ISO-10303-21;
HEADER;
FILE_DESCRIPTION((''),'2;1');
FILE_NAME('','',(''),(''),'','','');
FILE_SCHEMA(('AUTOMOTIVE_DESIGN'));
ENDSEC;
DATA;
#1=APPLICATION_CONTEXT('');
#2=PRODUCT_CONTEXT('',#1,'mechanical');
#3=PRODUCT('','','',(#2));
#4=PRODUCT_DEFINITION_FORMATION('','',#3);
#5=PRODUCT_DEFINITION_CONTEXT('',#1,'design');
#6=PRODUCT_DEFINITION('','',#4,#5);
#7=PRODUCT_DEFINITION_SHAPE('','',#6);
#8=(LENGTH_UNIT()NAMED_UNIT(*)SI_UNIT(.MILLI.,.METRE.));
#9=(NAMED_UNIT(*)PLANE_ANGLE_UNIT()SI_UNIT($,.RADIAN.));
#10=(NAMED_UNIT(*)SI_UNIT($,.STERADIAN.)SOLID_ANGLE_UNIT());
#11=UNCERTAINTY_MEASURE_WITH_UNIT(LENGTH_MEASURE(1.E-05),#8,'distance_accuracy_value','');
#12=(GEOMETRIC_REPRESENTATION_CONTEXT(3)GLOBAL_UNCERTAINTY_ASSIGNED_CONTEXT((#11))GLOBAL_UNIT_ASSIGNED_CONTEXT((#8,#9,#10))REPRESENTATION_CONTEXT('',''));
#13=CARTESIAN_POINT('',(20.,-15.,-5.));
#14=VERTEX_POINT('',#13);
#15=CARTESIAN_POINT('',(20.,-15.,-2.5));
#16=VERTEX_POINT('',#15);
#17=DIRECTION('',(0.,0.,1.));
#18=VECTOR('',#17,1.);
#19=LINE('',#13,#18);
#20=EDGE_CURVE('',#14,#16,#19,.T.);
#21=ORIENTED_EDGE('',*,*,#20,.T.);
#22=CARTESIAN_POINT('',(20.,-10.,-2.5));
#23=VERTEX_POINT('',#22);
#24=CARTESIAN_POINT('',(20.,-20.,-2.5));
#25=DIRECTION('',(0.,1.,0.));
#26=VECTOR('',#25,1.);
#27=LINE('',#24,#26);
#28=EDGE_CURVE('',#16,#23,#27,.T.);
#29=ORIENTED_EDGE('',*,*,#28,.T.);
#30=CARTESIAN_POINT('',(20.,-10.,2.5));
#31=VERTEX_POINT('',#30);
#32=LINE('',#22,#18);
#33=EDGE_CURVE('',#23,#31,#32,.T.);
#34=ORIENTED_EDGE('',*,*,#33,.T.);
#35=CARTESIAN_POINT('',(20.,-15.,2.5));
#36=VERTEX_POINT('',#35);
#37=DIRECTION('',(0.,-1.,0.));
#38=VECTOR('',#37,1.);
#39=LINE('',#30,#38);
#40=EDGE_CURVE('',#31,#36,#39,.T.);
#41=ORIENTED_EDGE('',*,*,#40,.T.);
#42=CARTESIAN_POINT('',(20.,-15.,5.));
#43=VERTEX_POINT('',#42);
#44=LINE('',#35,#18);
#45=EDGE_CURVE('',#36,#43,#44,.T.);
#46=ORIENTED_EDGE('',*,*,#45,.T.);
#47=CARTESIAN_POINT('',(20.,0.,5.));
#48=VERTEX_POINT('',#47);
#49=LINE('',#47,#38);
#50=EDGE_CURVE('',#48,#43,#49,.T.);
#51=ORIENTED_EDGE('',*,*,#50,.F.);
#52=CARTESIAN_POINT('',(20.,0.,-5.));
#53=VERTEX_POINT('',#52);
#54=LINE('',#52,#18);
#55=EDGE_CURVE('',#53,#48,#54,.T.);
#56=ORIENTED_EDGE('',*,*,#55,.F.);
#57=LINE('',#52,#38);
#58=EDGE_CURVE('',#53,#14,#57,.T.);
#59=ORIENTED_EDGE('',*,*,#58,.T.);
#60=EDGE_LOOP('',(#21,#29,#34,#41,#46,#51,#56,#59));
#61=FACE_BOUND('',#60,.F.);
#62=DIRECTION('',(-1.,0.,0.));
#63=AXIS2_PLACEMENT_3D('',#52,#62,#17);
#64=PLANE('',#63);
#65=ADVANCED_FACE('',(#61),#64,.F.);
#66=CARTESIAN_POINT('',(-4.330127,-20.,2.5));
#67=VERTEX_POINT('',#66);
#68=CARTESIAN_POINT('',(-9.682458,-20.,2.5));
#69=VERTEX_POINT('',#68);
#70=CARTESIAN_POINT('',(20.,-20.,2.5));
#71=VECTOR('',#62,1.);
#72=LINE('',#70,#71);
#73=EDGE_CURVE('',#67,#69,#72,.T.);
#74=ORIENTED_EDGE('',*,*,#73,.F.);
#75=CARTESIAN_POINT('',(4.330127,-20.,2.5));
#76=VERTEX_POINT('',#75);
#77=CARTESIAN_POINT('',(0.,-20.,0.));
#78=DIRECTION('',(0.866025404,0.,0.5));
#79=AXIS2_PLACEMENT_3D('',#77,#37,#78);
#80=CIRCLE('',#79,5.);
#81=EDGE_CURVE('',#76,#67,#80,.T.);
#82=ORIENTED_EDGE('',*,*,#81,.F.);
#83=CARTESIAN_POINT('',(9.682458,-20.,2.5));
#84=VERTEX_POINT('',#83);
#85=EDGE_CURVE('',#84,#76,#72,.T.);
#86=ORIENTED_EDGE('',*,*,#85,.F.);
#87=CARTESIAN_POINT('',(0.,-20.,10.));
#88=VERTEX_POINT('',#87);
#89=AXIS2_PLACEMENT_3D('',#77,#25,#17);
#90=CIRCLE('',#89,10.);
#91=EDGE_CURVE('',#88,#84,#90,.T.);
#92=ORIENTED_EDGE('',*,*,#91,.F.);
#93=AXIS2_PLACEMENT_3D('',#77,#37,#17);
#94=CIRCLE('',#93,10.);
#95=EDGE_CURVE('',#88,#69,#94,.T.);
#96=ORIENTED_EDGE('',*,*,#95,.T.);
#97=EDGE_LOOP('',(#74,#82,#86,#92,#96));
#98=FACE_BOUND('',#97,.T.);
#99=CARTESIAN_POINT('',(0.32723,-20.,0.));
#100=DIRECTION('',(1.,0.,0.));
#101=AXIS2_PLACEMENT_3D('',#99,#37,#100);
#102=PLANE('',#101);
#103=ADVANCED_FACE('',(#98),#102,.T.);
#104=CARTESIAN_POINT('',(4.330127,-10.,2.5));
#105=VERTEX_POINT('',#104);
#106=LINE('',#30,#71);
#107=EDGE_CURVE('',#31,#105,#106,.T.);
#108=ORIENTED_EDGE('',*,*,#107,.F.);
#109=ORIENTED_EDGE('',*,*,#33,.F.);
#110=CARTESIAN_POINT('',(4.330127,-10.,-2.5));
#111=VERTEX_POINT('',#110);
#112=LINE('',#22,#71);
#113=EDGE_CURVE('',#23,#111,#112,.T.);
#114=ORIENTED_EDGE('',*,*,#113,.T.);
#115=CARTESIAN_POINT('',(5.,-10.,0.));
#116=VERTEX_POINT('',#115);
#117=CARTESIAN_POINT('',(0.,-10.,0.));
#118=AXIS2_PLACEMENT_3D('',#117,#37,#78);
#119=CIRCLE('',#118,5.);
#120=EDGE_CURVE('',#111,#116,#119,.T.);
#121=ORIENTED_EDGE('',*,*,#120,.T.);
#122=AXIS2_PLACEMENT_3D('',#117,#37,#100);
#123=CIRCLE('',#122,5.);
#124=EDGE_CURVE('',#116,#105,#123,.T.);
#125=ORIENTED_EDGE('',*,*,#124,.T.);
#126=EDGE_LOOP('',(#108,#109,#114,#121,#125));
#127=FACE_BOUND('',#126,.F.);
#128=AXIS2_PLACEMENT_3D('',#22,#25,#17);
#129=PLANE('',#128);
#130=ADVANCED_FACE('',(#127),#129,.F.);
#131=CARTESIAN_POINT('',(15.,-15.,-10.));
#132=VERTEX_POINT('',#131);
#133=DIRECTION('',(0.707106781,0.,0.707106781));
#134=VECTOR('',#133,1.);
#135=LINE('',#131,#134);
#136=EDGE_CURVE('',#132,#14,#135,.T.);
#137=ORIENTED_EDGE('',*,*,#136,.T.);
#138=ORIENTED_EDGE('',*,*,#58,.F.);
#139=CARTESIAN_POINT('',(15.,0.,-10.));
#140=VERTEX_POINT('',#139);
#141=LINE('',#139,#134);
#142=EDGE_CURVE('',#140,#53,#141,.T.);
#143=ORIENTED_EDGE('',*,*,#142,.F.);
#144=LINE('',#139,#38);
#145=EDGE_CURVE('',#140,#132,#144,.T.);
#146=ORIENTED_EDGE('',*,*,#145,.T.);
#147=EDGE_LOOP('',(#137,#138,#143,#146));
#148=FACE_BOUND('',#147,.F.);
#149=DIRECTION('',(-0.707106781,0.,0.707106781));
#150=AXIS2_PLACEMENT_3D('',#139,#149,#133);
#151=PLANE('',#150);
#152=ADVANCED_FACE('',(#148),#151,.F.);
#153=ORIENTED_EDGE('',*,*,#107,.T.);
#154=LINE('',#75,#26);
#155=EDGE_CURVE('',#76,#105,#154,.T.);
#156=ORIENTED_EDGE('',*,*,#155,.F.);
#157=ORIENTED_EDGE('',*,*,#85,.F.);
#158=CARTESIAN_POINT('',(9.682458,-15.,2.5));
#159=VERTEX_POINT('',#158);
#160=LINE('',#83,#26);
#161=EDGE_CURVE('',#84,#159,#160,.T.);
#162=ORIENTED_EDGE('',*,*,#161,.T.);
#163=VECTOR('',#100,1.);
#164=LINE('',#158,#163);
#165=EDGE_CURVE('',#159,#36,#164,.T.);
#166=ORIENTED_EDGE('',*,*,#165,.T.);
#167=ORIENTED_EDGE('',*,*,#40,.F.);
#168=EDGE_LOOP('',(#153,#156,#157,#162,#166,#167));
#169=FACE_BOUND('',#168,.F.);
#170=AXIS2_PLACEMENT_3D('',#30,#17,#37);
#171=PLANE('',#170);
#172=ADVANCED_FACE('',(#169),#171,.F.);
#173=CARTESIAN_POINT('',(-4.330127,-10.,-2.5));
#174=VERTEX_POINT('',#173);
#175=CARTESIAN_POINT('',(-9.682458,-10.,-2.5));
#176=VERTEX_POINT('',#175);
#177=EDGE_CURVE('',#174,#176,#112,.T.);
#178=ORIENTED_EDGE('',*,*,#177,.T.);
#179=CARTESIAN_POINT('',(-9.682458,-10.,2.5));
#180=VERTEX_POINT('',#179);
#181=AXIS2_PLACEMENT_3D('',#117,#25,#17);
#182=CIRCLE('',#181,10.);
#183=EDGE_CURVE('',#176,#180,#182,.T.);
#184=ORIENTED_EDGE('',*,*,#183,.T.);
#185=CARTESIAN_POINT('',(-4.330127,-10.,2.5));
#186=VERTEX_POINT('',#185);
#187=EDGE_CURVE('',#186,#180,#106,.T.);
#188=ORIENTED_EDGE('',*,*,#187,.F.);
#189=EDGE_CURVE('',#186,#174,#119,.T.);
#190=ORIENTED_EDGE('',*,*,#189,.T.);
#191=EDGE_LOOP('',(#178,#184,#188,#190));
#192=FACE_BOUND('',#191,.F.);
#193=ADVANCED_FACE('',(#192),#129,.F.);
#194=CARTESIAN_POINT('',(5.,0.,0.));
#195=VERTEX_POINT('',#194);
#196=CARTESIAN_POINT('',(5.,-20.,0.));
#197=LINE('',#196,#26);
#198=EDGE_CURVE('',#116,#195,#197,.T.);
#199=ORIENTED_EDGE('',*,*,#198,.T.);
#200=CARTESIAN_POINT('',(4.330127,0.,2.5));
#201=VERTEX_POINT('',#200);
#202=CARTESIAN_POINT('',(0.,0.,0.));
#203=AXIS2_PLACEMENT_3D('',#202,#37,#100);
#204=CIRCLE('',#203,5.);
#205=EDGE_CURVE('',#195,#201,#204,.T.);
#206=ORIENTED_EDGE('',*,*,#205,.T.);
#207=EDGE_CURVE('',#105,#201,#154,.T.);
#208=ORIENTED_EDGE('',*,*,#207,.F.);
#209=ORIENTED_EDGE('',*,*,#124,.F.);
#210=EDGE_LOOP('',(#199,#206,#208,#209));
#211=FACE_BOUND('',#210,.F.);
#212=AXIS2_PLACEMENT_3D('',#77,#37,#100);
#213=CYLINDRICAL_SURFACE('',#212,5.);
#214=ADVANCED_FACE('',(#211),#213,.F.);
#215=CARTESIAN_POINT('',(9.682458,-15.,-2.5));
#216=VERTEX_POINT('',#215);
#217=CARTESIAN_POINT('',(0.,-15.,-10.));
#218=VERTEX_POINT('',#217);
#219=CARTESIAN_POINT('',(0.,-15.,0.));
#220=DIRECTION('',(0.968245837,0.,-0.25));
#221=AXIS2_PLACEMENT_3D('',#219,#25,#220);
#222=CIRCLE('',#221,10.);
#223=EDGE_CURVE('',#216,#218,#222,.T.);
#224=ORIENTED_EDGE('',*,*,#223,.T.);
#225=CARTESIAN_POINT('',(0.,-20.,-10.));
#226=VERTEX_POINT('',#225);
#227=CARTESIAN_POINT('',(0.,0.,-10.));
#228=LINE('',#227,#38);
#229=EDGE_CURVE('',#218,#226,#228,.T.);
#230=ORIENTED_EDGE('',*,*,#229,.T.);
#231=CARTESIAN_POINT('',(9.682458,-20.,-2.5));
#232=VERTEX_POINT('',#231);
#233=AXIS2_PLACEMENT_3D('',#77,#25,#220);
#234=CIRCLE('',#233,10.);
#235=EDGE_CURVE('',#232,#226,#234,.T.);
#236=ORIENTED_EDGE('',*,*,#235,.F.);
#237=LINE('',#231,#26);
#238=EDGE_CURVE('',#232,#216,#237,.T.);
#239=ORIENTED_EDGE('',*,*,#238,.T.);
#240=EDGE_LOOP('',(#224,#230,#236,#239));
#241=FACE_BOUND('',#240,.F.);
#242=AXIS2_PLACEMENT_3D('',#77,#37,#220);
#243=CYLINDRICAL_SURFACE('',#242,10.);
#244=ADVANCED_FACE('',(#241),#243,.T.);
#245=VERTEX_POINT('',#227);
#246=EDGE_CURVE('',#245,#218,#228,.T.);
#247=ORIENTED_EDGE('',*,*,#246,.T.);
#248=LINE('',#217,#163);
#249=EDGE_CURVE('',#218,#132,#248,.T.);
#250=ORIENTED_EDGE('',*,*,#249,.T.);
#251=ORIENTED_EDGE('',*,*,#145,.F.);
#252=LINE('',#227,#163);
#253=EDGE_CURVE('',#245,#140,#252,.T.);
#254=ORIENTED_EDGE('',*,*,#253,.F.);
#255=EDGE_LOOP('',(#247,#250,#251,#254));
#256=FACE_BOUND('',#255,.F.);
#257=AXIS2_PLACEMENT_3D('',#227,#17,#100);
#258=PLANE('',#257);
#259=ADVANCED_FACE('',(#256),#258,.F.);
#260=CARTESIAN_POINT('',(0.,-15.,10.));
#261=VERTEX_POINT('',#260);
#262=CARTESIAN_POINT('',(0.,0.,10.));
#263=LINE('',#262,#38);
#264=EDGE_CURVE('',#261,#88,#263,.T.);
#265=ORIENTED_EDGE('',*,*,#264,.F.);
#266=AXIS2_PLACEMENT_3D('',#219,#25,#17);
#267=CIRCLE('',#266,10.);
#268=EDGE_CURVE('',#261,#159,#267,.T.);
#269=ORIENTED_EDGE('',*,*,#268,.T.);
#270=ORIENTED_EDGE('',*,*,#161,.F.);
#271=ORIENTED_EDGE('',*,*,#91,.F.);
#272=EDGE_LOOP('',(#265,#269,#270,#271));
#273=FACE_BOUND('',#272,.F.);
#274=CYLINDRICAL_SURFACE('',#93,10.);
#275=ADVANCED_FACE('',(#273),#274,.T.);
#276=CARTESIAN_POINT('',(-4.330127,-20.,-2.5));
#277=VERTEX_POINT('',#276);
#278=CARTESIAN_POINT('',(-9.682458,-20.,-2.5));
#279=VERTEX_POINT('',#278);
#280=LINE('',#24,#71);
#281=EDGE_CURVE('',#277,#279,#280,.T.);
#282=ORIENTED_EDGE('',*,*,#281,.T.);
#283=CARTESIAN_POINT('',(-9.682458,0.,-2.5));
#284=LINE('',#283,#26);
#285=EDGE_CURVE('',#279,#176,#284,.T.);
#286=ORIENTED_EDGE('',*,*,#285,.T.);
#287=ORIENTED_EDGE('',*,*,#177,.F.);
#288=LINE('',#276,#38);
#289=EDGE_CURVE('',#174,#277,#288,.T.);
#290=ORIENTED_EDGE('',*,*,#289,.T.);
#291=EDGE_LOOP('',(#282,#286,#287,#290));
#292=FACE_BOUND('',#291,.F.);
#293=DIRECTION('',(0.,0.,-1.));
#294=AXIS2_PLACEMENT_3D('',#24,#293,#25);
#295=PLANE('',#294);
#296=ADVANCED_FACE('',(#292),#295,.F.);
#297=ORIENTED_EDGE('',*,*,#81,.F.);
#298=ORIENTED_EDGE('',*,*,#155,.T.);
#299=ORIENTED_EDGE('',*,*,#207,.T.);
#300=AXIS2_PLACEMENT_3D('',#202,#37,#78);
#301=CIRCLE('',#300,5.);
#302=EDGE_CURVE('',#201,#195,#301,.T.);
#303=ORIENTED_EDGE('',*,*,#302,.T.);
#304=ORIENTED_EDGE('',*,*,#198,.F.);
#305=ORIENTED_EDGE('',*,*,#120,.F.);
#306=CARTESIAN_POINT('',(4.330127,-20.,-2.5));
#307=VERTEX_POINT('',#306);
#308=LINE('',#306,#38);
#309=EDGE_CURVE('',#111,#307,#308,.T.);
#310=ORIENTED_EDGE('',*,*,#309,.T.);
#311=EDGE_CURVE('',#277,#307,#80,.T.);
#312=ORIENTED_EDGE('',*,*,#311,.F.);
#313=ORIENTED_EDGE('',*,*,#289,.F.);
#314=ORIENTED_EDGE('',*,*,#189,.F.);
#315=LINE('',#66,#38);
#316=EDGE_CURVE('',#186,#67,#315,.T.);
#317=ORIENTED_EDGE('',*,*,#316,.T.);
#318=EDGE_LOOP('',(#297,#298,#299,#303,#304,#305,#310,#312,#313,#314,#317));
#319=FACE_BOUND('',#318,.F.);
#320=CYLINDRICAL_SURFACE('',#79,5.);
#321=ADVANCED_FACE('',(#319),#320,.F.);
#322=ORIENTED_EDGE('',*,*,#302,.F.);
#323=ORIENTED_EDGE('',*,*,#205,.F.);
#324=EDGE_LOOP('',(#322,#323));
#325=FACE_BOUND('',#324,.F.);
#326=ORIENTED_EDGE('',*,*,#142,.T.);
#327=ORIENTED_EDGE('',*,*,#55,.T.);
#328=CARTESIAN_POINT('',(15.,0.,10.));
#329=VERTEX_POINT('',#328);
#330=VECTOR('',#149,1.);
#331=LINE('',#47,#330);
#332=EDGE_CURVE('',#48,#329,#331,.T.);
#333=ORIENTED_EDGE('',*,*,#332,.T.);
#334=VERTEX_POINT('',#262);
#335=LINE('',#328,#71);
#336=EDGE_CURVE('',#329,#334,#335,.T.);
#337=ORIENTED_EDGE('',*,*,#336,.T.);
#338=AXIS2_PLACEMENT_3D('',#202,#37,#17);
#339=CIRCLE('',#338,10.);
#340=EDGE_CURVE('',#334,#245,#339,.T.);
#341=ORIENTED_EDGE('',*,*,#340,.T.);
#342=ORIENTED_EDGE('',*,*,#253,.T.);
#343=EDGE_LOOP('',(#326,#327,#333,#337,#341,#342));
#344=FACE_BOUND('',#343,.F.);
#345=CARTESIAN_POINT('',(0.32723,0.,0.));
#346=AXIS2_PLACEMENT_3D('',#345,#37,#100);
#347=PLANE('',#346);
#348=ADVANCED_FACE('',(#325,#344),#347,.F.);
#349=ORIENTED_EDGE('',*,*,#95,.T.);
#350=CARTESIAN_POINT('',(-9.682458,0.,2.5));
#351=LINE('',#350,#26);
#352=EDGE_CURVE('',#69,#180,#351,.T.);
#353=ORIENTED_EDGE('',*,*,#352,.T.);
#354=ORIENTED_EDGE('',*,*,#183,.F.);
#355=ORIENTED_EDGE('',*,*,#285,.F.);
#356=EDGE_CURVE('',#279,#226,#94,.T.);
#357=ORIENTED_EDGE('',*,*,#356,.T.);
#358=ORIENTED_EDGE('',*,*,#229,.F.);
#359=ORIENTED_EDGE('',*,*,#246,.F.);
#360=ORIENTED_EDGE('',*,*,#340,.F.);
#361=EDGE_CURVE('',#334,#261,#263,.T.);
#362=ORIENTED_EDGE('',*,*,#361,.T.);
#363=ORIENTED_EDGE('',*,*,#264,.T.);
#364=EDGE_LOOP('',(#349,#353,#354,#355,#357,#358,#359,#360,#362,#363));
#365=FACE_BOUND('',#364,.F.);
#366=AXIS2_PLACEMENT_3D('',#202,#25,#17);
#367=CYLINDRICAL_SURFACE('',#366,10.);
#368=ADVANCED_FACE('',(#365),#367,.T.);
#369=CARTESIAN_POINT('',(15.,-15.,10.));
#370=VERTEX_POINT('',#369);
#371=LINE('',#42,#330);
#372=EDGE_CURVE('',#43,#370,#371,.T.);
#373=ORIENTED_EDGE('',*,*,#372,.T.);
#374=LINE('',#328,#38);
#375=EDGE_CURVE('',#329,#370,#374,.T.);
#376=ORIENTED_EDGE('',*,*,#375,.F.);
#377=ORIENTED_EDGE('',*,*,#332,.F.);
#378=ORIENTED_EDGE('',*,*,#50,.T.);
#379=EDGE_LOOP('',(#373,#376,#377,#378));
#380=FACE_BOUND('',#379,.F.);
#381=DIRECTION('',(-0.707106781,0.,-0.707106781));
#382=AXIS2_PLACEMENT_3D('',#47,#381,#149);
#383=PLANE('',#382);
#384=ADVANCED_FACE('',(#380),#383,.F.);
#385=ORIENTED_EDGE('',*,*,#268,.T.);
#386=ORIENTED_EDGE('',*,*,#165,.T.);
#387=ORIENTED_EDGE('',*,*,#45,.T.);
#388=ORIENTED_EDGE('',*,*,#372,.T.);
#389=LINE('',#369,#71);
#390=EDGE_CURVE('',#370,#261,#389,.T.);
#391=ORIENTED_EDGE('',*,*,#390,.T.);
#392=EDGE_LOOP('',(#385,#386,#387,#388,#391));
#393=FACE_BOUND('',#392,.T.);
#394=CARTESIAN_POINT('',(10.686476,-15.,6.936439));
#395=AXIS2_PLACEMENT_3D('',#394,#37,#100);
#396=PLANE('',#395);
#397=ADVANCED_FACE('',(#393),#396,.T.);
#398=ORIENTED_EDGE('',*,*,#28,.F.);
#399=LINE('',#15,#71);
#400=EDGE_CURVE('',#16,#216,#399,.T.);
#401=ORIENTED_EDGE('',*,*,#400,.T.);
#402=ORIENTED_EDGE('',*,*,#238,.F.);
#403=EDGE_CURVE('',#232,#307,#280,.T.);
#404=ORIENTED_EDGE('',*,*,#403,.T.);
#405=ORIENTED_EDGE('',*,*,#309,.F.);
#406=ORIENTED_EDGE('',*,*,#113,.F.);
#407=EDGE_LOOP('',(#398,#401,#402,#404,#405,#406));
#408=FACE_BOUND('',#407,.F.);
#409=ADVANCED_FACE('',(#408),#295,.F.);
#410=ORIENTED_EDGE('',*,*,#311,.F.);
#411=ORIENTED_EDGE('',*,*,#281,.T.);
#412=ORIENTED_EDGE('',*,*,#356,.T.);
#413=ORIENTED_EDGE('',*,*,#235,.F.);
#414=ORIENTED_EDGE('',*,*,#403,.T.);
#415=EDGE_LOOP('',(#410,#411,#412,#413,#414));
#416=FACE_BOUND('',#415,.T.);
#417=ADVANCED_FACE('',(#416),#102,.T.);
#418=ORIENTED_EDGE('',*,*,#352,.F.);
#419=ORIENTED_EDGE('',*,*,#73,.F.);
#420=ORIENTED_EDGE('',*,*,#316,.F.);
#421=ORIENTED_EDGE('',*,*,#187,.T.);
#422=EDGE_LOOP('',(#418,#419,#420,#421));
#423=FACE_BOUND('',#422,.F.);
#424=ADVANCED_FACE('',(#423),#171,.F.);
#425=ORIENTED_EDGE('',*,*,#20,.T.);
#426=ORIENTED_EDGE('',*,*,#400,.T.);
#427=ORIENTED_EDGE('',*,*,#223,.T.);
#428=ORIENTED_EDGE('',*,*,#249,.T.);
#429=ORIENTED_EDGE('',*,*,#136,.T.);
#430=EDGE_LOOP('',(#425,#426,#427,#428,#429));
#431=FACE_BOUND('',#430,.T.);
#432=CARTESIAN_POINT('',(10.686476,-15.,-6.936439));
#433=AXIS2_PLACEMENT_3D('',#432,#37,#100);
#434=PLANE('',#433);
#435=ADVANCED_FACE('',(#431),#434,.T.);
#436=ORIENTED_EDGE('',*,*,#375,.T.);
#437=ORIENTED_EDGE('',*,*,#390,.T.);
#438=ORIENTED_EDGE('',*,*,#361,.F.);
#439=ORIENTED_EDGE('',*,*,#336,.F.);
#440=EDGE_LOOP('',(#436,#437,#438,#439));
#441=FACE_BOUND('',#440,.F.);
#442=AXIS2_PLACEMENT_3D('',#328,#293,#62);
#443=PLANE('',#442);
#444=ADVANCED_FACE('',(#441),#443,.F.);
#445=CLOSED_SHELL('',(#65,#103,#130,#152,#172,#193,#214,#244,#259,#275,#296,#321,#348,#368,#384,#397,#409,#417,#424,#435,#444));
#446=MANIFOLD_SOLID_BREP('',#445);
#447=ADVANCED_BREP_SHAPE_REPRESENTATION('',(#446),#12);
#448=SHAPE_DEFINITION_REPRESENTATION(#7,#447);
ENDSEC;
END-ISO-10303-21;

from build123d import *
from build123d import SkipClean  # not in build123d's __all__

# Parameters (mm, degrees)
F1_DEPTH = 20
F3_DEPTH = 50
F5_DEPTH = 5
F7_DEPTH = 25


# Not quite as in the source:
# - after a boolean that leaves OpenCascade's solid faulty, fix() repairs it


with BuildPart() as f1:
    # F0 (on Front) → F1 (new body)
    with BuildSketch(Plane.XZ):
        with BuildLine():
            ThreePointArc((0, -10), (7.0710678119, -7.0710678119), (10, 0))
            ThreePointArc((10, 0), (7.0710678119, 7.0710678119), (0, 10))
            ThreePointArc((0, 10), (-10, 0), (0, -10))
        make_face()
        with BuildLine():
            ThreePointArc((0, 10), (7.0710678119, 7.0710678119), (10, 0))
            ThreePointArc((10, 0), (7.0710678119, -7.0710678119), (0, -10))
            Line((0, -10), (15, -10))
            Line((15, -10), (20, -5))
            Line((20, -5), (20, 5))
            Line((20, 5), (15, 10))
            Line((15, 10), (0, 10))
        make_face()
    extrude(amount=F1_DEPTH)

    # F2 (on face) → F3 (cut)
    with BuildSketch(Plane.YZ.offset(20)):
        Polygon((-20, 2.5), (-20, 0), (-20, -2.5), (-10, -2.5), (-10, 2.5), align=None)
    extrude(amount=-F3_DEPTH, mode=Mode.SUBTRACT)

    # F4 (on face) → F5 (cut)
    with BuildSketch(Plane.XZ.offset(20)):
        with BuildLine():
            ThreePointArc((9.6824583655, -2.5), (6.123724357, -7.9056941504), (0, -10))
            Line((0, -10), (15, -10))
            Line((15, -10), (20, -5))
            Line((20, -5), (20, -2.5))
            Line((20, -2.5), (9.6824583655, -2.5))
        make_face()
        with BuildLine():
            Line((15, 10), (0, 10))
            ThreePointArc((0, 10), (6.123724357, 7.9056941504), (9.6824583655, 2.5))
            Line((9.6824583655, 2.5), (20, 2.5))
            Line((20, 2.5), (20, 5))
            Line((20, 5), (15, 10))
        make_face()
    with SkipClean():  # cleaning this boolean's faces spoils the solid; the shape is the same uncleaned
        extrude(amount=-F5_DEPTH, mode=Mode.SUBTRACT)

    # F6 (on face) → F7 (cut)
    with BuildSketch(Plane.XZ.offset(20)):
        with BuildLine():
            ThreePointArc((-4.3301270189, 2.5), (-1.2940952255, -4.8296291314), (5, 0))
            ThreePointArc((5, 0), (4.8296291314, 1.2940952255), (4.3301270189, 2.5))
            Line((4.3301270189, 2.5), (-4.3301270189, 2.5))
        make_face()
        with BuildLine():
            Line((-4.3301270189, 2.5), (4.3301270189, 2.5))
            ThreePointArc((4.3301270189, 2.5), (0, 5), (-4.3301270189, 2.5))
        make_face()
    extrude(amount=-F7_DEPTH, mode=Mode.SUBTRACT)

    add(f1.part.fix(), mode=Mode.REPLACE)


solid = f1.part
